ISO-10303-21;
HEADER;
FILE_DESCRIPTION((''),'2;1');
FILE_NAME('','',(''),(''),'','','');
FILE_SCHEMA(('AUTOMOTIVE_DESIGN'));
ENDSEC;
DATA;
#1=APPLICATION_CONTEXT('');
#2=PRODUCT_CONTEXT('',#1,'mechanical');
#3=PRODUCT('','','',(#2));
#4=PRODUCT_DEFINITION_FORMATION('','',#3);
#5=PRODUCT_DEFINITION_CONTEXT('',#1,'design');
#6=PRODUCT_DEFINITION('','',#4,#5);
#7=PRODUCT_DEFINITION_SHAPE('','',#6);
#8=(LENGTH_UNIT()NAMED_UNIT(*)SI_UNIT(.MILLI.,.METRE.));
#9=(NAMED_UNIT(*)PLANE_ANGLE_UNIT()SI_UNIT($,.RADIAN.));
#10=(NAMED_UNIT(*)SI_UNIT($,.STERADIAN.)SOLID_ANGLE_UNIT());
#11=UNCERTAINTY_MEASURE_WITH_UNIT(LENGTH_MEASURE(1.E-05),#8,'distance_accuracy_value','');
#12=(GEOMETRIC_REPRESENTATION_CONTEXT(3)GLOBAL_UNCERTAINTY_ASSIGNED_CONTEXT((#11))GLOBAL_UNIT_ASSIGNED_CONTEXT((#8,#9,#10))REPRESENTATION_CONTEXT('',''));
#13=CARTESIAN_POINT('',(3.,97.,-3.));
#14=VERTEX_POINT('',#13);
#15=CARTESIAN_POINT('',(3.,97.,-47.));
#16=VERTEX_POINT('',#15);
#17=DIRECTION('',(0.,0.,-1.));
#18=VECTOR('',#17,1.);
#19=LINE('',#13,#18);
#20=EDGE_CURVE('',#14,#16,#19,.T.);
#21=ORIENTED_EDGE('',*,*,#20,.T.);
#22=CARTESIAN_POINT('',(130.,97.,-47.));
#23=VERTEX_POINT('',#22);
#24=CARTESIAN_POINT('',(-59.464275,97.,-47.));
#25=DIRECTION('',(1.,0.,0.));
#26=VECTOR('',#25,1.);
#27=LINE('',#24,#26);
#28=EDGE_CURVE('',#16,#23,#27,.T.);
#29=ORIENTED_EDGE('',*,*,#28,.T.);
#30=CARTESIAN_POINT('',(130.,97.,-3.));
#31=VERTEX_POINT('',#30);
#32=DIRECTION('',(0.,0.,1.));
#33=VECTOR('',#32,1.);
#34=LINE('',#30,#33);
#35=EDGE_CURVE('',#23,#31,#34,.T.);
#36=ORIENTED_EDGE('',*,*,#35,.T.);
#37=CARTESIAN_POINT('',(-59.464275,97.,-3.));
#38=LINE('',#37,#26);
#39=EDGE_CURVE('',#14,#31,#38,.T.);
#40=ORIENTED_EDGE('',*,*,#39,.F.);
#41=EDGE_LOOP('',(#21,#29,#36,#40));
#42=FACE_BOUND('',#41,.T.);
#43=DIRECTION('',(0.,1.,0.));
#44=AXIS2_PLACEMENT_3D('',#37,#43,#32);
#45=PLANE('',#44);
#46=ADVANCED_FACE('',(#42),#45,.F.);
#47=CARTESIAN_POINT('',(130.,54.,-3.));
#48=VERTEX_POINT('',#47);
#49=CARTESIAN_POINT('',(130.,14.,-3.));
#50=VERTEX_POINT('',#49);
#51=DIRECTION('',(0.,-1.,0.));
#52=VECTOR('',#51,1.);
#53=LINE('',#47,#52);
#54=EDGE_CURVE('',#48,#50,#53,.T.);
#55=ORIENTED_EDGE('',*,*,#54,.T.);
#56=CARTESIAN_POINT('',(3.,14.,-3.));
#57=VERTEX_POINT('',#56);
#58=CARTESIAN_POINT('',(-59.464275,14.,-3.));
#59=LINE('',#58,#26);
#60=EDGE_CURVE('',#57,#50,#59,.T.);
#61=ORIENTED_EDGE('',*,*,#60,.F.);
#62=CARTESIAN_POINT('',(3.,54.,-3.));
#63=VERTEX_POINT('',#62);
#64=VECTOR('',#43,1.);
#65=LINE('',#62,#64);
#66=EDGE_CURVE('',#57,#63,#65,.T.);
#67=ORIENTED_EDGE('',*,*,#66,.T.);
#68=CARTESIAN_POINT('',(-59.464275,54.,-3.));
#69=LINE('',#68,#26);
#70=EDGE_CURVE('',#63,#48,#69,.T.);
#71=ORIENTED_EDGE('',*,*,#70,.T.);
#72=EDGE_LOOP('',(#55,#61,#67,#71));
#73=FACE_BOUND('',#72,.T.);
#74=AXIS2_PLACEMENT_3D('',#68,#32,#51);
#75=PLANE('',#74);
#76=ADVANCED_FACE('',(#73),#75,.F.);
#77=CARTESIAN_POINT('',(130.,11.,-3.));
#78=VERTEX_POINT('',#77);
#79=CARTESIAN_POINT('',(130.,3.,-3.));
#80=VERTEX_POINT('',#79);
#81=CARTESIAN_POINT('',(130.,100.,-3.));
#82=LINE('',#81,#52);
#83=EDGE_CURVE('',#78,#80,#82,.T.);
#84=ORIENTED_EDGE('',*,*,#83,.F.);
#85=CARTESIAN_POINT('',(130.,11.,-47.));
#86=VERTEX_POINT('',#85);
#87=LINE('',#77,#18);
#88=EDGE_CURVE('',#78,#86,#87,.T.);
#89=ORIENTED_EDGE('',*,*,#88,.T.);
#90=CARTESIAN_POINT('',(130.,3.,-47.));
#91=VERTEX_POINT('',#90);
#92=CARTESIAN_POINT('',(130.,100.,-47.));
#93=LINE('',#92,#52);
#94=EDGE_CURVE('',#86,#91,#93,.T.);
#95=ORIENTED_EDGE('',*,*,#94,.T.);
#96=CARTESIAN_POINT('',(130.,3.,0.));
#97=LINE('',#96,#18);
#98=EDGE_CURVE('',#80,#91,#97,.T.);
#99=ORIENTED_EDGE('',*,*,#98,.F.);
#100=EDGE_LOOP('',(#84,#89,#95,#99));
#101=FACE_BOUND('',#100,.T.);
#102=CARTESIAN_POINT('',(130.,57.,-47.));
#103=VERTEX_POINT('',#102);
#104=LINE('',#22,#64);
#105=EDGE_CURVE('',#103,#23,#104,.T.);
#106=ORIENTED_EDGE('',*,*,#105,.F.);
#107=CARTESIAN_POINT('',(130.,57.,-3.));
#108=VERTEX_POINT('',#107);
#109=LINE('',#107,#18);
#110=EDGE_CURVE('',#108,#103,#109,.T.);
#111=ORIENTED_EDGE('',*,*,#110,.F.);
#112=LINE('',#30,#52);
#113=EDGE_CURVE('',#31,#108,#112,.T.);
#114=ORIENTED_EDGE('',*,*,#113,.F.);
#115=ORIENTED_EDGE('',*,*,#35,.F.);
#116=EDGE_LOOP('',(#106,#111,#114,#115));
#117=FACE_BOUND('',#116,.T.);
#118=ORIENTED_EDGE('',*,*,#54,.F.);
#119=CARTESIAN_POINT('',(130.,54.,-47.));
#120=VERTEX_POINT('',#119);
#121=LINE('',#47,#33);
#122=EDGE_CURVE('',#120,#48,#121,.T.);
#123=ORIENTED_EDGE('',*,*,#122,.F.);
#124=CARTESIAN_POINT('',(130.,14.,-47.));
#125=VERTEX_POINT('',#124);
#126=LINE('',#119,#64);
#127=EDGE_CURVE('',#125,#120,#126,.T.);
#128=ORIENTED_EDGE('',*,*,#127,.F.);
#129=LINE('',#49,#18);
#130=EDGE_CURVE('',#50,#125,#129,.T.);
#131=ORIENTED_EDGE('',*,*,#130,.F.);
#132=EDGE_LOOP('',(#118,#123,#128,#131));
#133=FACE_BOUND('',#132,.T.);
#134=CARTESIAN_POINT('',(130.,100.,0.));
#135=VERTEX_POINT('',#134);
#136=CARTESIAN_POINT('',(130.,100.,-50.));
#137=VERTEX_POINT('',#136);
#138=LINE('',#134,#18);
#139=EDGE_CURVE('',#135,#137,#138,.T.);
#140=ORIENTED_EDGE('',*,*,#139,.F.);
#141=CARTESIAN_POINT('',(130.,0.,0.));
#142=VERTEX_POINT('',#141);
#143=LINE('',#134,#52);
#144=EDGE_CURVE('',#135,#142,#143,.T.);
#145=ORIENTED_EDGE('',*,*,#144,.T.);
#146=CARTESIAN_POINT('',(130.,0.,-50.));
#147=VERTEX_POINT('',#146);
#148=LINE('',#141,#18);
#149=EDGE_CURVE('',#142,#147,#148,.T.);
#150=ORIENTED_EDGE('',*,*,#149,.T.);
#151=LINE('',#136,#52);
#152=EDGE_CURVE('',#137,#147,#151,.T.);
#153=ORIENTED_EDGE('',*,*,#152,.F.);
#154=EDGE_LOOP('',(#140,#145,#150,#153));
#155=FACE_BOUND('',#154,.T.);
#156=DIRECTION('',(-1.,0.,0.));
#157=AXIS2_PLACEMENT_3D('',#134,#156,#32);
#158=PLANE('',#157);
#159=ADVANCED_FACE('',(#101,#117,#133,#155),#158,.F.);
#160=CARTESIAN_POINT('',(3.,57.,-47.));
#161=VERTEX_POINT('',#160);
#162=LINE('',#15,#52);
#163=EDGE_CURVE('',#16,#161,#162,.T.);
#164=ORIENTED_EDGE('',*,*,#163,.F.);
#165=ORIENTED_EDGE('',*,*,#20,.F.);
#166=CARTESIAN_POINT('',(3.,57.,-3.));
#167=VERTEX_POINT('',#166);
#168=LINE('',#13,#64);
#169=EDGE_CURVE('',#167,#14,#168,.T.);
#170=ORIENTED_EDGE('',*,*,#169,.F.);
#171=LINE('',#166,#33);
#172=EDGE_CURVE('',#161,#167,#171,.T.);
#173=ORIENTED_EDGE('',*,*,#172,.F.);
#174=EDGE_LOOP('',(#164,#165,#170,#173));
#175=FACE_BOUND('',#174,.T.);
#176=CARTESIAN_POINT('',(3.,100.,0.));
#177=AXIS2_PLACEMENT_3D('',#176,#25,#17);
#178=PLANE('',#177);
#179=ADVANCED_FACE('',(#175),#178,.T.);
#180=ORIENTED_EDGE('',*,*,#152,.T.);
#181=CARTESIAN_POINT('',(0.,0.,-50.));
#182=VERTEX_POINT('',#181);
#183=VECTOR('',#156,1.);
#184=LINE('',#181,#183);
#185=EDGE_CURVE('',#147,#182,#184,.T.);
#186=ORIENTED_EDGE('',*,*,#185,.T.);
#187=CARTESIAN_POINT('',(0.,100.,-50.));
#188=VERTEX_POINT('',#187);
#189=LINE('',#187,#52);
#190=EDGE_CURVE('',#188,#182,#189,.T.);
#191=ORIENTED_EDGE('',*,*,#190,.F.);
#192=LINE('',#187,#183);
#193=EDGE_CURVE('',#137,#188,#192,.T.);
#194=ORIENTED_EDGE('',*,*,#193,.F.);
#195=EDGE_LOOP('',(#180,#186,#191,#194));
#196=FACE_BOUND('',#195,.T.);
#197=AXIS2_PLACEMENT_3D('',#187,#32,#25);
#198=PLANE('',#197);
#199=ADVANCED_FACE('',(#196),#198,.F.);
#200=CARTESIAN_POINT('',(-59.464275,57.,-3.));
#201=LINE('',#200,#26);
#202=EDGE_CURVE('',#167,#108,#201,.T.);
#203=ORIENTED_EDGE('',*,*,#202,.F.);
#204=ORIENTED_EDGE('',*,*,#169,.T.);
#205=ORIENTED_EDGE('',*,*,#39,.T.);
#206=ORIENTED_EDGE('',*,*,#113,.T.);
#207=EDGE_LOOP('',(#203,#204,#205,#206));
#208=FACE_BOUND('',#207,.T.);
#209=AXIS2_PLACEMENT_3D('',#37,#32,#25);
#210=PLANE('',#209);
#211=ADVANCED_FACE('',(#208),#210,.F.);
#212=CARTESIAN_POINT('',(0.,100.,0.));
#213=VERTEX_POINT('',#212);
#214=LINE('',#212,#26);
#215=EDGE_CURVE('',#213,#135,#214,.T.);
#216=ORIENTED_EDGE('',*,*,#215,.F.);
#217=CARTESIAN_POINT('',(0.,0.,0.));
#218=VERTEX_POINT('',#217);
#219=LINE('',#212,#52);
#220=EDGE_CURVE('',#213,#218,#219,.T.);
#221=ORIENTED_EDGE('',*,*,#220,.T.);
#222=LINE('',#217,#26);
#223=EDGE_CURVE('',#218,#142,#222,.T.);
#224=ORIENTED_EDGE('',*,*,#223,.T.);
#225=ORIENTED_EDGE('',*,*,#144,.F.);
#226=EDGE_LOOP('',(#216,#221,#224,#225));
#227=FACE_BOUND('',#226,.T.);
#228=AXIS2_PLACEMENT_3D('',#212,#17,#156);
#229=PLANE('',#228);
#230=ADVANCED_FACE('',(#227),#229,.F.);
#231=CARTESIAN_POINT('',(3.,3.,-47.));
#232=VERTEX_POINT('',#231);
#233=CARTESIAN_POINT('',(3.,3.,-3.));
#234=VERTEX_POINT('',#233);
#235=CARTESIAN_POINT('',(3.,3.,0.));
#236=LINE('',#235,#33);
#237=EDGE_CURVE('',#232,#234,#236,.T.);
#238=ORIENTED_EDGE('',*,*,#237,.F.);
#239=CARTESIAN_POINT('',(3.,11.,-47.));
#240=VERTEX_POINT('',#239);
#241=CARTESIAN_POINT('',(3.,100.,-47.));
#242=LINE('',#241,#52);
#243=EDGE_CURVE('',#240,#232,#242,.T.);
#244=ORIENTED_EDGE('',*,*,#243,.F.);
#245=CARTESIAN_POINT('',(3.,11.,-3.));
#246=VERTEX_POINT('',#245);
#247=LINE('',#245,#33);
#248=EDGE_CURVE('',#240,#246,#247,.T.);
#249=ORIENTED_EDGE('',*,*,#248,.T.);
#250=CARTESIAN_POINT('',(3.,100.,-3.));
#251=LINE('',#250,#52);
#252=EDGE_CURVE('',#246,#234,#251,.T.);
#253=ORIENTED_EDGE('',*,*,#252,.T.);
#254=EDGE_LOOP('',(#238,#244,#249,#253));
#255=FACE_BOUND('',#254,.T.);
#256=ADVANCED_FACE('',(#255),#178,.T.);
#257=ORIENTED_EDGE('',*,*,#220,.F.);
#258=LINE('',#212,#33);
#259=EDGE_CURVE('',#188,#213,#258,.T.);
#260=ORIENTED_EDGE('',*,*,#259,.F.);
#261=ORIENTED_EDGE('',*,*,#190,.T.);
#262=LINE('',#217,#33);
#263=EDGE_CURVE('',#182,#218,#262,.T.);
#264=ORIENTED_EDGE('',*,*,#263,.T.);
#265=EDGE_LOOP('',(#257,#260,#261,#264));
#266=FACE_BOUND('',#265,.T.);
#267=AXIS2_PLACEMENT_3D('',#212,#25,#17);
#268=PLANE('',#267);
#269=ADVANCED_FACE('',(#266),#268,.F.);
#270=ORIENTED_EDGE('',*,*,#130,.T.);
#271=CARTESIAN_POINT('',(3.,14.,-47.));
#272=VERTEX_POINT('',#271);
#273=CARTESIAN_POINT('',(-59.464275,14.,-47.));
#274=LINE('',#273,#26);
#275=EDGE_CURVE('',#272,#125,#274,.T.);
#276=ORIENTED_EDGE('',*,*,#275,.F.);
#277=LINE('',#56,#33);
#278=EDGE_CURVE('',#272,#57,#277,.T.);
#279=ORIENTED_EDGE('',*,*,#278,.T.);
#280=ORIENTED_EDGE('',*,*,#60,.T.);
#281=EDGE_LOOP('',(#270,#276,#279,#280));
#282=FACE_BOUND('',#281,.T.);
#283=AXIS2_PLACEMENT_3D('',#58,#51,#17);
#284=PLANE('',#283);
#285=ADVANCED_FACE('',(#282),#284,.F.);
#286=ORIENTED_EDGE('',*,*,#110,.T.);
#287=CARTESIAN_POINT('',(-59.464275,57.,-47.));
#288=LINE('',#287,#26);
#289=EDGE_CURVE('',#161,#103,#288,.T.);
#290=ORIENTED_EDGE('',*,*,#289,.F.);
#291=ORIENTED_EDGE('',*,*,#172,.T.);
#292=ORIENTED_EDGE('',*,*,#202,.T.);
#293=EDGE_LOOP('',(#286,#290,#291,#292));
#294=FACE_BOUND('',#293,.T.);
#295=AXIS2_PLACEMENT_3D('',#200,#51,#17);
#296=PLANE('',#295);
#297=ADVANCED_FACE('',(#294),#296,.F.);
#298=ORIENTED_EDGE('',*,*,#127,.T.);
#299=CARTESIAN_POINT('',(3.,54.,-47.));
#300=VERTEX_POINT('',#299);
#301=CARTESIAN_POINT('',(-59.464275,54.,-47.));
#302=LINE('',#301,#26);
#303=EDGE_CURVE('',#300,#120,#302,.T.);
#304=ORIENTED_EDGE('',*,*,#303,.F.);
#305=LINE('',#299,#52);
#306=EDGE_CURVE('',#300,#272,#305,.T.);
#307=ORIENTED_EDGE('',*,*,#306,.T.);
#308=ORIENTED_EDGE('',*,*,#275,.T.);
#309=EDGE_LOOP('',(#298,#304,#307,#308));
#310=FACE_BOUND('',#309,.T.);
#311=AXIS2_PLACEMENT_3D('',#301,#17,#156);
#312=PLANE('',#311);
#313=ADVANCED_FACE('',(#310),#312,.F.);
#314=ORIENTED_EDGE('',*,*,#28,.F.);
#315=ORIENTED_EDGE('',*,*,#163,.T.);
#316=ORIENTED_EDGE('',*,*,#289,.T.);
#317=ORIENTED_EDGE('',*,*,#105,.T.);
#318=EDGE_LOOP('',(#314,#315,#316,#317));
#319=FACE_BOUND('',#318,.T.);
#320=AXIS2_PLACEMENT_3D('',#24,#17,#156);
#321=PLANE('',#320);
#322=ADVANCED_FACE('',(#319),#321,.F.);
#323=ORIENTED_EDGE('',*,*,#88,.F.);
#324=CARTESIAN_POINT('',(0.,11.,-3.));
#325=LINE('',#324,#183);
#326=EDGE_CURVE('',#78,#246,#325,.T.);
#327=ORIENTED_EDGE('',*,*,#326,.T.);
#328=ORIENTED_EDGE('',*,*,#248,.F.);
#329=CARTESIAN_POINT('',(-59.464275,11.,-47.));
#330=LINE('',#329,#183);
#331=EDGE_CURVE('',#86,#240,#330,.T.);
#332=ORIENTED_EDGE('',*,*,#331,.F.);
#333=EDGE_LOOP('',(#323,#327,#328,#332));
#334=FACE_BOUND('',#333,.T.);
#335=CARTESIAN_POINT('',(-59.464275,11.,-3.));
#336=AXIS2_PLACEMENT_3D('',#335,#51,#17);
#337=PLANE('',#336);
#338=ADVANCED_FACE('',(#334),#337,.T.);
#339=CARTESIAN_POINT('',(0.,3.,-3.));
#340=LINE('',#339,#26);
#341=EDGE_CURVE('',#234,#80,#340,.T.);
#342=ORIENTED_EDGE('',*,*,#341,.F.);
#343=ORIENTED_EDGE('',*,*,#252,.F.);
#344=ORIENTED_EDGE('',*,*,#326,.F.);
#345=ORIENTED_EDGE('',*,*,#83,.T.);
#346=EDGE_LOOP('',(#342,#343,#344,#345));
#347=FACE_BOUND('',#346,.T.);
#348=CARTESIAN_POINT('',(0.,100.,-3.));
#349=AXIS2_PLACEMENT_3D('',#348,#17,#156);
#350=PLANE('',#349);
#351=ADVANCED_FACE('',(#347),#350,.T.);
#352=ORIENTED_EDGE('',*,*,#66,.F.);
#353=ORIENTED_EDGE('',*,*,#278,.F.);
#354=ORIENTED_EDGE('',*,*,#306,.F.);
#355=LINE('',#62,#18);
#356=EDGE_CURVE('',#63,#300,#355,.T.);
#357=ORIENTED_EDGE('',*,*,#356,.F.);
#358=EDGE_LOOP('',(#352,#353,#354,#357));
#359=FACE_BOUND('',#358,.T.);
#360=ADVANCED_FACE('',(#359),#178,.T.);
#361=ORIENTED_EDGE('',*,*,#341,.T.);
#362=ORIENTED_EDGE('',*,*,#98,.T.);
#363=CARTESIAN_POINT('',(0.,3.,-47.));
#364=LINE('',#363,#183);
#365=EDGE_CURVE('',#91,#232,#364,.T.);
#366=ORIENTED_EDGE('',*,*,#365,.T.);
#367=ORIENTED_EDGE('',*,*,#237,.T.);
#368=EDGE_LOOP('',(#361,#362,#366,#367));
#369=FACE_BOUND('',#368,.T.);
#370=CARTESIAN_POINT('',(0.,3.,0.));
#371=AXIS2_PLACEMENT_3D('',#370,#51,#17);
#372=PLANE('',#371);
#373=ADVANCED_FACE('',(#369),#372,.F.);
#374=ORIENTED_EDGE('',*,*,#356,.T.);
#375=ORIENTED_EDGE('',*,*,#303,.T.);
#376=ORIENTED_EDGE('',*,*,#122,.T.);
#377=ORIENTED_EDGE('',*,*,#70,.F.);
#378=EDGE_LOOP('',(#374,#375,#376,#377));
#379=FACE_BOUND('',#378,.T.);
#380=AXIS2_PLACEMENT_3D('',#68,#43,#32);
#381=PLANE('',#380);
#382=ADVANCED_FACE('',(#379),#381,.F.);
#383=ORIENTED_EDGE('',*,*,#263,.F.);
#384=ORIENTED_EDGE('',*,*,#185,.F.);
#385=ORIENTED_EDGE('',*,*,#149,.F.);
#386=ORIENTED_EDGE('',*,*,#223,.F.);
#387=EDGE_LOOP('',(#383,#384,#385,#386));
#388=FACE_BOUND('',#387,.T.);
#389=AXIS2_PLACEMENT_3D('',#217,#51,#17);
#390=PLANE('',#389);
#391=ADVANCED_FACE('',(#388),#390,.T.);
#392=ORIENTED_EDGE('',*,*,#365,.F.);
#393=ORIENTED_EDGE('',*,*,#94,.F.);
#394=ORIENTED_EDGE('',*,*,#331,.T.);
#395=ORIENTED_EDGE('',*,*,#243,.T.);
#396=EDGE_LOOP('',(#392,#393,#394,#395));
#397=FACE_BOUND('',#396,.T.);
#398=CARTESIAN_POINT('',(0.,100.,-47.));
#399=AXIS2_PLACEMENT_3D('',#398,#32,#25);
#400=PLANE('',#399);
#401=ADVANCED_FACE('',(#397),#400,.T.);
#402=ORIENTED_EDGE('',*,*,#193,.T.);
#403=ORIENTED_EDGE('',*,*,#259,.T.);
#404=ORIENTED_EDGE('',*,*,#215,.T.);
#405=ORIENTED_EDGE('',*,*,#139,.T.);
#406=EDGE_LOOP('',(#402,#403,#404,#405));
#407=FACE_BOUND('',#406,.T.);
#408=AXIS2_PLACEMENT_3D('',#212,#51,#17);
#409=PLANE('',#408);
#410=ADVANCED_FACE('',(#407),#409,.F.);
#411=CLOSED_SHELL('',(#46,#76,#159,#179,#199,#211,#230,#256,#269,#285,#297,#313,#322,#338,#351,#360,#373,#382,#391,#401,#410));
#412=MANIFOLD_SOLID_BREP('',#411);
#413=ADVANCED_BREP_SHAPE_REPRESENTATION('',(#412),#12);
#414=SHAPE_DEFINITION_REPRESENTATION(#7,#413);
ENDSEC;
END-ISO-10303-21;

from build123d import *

# Parameters (mm, degrees)
ESQUISSE1_W             = 130
ESQUISSE1_H             = 50
BOSS_EXTRU_1_DEPTH      = 100
ESQUISSE2_W             = 44
ESQUISSE2_H             = 40
ENL_V_MAT_EXTRU_1_DEPTH = 127
ESQUISSE3_W             = 44
ESQUISSE3_H             = 40
ENL_V_MAT_EXTRU_2_DEPTH = 127
COQUE1_START            = -47
COQUE1_OUTLINE_W        = 127
COQUE1_OUTLINE_H        = 8
COQUE1_DEPTH            = 44


# Read off the part's stored shape, not the designer's step: Coque1
with BuildPart() as part:
    # Esquisse1 → Boss.-Extru.1 (new body)
    with BuildSketch(Plane(origin=(0, 0, 0), x_dir=(1, 0, 0), z_dir=(0, 1, 0))):
        with Locations((65, 25)):
            Rectangle(ESQUISSE1_W, ESQUISSE1_H)
    extrude(amount=BOSS_EXTRU_1_DEPTH)

    # Esquisse2 → Enlèv. mat.-Extru.1 (cut)
    with BuildSketch(Plane(origin=(130, 0, 0), x_dir=(0, 0, -1), z_dir=(1, 0, 0))):
        with Locations((25, 77)):
            Rectangle(ESQUISSE2_W, ESQUISSE2_H)
    extrude(amount=-ENL_V_MAT_EXTRU_1_DEPTH, mode=Mode.SUBTRACT)

    # Esquisse3 → Enlèv. mat.-Extru.2 (cut)
    with BuildSketch(Plane(origin=(130, 0, 0), x_dir=(0, 0, -1), z_dir=(1, 0, 0))):
        with Locations((25, 34)):
            Rectangle(ESQUISSE3_W, ESQUISSE3_H)
    extrude(amount=-ENL_V_MAT_EXTRU_2_DEPTH, mode=Mode.SUBTRACT)

    # Coque1 outline → Coque1 (cut)
    with BuildSketch(Plane.XY.offset(COQUE1_START)):
        with Locations((66.5, 7)):
            Rectangle(COQUE1_OUTLINE_W, COQUE1_OUTLINE_H)
    extrude(amount=COQUE1_DEPTH, mode=Mode.SUBTRACT)


solid = part.part
